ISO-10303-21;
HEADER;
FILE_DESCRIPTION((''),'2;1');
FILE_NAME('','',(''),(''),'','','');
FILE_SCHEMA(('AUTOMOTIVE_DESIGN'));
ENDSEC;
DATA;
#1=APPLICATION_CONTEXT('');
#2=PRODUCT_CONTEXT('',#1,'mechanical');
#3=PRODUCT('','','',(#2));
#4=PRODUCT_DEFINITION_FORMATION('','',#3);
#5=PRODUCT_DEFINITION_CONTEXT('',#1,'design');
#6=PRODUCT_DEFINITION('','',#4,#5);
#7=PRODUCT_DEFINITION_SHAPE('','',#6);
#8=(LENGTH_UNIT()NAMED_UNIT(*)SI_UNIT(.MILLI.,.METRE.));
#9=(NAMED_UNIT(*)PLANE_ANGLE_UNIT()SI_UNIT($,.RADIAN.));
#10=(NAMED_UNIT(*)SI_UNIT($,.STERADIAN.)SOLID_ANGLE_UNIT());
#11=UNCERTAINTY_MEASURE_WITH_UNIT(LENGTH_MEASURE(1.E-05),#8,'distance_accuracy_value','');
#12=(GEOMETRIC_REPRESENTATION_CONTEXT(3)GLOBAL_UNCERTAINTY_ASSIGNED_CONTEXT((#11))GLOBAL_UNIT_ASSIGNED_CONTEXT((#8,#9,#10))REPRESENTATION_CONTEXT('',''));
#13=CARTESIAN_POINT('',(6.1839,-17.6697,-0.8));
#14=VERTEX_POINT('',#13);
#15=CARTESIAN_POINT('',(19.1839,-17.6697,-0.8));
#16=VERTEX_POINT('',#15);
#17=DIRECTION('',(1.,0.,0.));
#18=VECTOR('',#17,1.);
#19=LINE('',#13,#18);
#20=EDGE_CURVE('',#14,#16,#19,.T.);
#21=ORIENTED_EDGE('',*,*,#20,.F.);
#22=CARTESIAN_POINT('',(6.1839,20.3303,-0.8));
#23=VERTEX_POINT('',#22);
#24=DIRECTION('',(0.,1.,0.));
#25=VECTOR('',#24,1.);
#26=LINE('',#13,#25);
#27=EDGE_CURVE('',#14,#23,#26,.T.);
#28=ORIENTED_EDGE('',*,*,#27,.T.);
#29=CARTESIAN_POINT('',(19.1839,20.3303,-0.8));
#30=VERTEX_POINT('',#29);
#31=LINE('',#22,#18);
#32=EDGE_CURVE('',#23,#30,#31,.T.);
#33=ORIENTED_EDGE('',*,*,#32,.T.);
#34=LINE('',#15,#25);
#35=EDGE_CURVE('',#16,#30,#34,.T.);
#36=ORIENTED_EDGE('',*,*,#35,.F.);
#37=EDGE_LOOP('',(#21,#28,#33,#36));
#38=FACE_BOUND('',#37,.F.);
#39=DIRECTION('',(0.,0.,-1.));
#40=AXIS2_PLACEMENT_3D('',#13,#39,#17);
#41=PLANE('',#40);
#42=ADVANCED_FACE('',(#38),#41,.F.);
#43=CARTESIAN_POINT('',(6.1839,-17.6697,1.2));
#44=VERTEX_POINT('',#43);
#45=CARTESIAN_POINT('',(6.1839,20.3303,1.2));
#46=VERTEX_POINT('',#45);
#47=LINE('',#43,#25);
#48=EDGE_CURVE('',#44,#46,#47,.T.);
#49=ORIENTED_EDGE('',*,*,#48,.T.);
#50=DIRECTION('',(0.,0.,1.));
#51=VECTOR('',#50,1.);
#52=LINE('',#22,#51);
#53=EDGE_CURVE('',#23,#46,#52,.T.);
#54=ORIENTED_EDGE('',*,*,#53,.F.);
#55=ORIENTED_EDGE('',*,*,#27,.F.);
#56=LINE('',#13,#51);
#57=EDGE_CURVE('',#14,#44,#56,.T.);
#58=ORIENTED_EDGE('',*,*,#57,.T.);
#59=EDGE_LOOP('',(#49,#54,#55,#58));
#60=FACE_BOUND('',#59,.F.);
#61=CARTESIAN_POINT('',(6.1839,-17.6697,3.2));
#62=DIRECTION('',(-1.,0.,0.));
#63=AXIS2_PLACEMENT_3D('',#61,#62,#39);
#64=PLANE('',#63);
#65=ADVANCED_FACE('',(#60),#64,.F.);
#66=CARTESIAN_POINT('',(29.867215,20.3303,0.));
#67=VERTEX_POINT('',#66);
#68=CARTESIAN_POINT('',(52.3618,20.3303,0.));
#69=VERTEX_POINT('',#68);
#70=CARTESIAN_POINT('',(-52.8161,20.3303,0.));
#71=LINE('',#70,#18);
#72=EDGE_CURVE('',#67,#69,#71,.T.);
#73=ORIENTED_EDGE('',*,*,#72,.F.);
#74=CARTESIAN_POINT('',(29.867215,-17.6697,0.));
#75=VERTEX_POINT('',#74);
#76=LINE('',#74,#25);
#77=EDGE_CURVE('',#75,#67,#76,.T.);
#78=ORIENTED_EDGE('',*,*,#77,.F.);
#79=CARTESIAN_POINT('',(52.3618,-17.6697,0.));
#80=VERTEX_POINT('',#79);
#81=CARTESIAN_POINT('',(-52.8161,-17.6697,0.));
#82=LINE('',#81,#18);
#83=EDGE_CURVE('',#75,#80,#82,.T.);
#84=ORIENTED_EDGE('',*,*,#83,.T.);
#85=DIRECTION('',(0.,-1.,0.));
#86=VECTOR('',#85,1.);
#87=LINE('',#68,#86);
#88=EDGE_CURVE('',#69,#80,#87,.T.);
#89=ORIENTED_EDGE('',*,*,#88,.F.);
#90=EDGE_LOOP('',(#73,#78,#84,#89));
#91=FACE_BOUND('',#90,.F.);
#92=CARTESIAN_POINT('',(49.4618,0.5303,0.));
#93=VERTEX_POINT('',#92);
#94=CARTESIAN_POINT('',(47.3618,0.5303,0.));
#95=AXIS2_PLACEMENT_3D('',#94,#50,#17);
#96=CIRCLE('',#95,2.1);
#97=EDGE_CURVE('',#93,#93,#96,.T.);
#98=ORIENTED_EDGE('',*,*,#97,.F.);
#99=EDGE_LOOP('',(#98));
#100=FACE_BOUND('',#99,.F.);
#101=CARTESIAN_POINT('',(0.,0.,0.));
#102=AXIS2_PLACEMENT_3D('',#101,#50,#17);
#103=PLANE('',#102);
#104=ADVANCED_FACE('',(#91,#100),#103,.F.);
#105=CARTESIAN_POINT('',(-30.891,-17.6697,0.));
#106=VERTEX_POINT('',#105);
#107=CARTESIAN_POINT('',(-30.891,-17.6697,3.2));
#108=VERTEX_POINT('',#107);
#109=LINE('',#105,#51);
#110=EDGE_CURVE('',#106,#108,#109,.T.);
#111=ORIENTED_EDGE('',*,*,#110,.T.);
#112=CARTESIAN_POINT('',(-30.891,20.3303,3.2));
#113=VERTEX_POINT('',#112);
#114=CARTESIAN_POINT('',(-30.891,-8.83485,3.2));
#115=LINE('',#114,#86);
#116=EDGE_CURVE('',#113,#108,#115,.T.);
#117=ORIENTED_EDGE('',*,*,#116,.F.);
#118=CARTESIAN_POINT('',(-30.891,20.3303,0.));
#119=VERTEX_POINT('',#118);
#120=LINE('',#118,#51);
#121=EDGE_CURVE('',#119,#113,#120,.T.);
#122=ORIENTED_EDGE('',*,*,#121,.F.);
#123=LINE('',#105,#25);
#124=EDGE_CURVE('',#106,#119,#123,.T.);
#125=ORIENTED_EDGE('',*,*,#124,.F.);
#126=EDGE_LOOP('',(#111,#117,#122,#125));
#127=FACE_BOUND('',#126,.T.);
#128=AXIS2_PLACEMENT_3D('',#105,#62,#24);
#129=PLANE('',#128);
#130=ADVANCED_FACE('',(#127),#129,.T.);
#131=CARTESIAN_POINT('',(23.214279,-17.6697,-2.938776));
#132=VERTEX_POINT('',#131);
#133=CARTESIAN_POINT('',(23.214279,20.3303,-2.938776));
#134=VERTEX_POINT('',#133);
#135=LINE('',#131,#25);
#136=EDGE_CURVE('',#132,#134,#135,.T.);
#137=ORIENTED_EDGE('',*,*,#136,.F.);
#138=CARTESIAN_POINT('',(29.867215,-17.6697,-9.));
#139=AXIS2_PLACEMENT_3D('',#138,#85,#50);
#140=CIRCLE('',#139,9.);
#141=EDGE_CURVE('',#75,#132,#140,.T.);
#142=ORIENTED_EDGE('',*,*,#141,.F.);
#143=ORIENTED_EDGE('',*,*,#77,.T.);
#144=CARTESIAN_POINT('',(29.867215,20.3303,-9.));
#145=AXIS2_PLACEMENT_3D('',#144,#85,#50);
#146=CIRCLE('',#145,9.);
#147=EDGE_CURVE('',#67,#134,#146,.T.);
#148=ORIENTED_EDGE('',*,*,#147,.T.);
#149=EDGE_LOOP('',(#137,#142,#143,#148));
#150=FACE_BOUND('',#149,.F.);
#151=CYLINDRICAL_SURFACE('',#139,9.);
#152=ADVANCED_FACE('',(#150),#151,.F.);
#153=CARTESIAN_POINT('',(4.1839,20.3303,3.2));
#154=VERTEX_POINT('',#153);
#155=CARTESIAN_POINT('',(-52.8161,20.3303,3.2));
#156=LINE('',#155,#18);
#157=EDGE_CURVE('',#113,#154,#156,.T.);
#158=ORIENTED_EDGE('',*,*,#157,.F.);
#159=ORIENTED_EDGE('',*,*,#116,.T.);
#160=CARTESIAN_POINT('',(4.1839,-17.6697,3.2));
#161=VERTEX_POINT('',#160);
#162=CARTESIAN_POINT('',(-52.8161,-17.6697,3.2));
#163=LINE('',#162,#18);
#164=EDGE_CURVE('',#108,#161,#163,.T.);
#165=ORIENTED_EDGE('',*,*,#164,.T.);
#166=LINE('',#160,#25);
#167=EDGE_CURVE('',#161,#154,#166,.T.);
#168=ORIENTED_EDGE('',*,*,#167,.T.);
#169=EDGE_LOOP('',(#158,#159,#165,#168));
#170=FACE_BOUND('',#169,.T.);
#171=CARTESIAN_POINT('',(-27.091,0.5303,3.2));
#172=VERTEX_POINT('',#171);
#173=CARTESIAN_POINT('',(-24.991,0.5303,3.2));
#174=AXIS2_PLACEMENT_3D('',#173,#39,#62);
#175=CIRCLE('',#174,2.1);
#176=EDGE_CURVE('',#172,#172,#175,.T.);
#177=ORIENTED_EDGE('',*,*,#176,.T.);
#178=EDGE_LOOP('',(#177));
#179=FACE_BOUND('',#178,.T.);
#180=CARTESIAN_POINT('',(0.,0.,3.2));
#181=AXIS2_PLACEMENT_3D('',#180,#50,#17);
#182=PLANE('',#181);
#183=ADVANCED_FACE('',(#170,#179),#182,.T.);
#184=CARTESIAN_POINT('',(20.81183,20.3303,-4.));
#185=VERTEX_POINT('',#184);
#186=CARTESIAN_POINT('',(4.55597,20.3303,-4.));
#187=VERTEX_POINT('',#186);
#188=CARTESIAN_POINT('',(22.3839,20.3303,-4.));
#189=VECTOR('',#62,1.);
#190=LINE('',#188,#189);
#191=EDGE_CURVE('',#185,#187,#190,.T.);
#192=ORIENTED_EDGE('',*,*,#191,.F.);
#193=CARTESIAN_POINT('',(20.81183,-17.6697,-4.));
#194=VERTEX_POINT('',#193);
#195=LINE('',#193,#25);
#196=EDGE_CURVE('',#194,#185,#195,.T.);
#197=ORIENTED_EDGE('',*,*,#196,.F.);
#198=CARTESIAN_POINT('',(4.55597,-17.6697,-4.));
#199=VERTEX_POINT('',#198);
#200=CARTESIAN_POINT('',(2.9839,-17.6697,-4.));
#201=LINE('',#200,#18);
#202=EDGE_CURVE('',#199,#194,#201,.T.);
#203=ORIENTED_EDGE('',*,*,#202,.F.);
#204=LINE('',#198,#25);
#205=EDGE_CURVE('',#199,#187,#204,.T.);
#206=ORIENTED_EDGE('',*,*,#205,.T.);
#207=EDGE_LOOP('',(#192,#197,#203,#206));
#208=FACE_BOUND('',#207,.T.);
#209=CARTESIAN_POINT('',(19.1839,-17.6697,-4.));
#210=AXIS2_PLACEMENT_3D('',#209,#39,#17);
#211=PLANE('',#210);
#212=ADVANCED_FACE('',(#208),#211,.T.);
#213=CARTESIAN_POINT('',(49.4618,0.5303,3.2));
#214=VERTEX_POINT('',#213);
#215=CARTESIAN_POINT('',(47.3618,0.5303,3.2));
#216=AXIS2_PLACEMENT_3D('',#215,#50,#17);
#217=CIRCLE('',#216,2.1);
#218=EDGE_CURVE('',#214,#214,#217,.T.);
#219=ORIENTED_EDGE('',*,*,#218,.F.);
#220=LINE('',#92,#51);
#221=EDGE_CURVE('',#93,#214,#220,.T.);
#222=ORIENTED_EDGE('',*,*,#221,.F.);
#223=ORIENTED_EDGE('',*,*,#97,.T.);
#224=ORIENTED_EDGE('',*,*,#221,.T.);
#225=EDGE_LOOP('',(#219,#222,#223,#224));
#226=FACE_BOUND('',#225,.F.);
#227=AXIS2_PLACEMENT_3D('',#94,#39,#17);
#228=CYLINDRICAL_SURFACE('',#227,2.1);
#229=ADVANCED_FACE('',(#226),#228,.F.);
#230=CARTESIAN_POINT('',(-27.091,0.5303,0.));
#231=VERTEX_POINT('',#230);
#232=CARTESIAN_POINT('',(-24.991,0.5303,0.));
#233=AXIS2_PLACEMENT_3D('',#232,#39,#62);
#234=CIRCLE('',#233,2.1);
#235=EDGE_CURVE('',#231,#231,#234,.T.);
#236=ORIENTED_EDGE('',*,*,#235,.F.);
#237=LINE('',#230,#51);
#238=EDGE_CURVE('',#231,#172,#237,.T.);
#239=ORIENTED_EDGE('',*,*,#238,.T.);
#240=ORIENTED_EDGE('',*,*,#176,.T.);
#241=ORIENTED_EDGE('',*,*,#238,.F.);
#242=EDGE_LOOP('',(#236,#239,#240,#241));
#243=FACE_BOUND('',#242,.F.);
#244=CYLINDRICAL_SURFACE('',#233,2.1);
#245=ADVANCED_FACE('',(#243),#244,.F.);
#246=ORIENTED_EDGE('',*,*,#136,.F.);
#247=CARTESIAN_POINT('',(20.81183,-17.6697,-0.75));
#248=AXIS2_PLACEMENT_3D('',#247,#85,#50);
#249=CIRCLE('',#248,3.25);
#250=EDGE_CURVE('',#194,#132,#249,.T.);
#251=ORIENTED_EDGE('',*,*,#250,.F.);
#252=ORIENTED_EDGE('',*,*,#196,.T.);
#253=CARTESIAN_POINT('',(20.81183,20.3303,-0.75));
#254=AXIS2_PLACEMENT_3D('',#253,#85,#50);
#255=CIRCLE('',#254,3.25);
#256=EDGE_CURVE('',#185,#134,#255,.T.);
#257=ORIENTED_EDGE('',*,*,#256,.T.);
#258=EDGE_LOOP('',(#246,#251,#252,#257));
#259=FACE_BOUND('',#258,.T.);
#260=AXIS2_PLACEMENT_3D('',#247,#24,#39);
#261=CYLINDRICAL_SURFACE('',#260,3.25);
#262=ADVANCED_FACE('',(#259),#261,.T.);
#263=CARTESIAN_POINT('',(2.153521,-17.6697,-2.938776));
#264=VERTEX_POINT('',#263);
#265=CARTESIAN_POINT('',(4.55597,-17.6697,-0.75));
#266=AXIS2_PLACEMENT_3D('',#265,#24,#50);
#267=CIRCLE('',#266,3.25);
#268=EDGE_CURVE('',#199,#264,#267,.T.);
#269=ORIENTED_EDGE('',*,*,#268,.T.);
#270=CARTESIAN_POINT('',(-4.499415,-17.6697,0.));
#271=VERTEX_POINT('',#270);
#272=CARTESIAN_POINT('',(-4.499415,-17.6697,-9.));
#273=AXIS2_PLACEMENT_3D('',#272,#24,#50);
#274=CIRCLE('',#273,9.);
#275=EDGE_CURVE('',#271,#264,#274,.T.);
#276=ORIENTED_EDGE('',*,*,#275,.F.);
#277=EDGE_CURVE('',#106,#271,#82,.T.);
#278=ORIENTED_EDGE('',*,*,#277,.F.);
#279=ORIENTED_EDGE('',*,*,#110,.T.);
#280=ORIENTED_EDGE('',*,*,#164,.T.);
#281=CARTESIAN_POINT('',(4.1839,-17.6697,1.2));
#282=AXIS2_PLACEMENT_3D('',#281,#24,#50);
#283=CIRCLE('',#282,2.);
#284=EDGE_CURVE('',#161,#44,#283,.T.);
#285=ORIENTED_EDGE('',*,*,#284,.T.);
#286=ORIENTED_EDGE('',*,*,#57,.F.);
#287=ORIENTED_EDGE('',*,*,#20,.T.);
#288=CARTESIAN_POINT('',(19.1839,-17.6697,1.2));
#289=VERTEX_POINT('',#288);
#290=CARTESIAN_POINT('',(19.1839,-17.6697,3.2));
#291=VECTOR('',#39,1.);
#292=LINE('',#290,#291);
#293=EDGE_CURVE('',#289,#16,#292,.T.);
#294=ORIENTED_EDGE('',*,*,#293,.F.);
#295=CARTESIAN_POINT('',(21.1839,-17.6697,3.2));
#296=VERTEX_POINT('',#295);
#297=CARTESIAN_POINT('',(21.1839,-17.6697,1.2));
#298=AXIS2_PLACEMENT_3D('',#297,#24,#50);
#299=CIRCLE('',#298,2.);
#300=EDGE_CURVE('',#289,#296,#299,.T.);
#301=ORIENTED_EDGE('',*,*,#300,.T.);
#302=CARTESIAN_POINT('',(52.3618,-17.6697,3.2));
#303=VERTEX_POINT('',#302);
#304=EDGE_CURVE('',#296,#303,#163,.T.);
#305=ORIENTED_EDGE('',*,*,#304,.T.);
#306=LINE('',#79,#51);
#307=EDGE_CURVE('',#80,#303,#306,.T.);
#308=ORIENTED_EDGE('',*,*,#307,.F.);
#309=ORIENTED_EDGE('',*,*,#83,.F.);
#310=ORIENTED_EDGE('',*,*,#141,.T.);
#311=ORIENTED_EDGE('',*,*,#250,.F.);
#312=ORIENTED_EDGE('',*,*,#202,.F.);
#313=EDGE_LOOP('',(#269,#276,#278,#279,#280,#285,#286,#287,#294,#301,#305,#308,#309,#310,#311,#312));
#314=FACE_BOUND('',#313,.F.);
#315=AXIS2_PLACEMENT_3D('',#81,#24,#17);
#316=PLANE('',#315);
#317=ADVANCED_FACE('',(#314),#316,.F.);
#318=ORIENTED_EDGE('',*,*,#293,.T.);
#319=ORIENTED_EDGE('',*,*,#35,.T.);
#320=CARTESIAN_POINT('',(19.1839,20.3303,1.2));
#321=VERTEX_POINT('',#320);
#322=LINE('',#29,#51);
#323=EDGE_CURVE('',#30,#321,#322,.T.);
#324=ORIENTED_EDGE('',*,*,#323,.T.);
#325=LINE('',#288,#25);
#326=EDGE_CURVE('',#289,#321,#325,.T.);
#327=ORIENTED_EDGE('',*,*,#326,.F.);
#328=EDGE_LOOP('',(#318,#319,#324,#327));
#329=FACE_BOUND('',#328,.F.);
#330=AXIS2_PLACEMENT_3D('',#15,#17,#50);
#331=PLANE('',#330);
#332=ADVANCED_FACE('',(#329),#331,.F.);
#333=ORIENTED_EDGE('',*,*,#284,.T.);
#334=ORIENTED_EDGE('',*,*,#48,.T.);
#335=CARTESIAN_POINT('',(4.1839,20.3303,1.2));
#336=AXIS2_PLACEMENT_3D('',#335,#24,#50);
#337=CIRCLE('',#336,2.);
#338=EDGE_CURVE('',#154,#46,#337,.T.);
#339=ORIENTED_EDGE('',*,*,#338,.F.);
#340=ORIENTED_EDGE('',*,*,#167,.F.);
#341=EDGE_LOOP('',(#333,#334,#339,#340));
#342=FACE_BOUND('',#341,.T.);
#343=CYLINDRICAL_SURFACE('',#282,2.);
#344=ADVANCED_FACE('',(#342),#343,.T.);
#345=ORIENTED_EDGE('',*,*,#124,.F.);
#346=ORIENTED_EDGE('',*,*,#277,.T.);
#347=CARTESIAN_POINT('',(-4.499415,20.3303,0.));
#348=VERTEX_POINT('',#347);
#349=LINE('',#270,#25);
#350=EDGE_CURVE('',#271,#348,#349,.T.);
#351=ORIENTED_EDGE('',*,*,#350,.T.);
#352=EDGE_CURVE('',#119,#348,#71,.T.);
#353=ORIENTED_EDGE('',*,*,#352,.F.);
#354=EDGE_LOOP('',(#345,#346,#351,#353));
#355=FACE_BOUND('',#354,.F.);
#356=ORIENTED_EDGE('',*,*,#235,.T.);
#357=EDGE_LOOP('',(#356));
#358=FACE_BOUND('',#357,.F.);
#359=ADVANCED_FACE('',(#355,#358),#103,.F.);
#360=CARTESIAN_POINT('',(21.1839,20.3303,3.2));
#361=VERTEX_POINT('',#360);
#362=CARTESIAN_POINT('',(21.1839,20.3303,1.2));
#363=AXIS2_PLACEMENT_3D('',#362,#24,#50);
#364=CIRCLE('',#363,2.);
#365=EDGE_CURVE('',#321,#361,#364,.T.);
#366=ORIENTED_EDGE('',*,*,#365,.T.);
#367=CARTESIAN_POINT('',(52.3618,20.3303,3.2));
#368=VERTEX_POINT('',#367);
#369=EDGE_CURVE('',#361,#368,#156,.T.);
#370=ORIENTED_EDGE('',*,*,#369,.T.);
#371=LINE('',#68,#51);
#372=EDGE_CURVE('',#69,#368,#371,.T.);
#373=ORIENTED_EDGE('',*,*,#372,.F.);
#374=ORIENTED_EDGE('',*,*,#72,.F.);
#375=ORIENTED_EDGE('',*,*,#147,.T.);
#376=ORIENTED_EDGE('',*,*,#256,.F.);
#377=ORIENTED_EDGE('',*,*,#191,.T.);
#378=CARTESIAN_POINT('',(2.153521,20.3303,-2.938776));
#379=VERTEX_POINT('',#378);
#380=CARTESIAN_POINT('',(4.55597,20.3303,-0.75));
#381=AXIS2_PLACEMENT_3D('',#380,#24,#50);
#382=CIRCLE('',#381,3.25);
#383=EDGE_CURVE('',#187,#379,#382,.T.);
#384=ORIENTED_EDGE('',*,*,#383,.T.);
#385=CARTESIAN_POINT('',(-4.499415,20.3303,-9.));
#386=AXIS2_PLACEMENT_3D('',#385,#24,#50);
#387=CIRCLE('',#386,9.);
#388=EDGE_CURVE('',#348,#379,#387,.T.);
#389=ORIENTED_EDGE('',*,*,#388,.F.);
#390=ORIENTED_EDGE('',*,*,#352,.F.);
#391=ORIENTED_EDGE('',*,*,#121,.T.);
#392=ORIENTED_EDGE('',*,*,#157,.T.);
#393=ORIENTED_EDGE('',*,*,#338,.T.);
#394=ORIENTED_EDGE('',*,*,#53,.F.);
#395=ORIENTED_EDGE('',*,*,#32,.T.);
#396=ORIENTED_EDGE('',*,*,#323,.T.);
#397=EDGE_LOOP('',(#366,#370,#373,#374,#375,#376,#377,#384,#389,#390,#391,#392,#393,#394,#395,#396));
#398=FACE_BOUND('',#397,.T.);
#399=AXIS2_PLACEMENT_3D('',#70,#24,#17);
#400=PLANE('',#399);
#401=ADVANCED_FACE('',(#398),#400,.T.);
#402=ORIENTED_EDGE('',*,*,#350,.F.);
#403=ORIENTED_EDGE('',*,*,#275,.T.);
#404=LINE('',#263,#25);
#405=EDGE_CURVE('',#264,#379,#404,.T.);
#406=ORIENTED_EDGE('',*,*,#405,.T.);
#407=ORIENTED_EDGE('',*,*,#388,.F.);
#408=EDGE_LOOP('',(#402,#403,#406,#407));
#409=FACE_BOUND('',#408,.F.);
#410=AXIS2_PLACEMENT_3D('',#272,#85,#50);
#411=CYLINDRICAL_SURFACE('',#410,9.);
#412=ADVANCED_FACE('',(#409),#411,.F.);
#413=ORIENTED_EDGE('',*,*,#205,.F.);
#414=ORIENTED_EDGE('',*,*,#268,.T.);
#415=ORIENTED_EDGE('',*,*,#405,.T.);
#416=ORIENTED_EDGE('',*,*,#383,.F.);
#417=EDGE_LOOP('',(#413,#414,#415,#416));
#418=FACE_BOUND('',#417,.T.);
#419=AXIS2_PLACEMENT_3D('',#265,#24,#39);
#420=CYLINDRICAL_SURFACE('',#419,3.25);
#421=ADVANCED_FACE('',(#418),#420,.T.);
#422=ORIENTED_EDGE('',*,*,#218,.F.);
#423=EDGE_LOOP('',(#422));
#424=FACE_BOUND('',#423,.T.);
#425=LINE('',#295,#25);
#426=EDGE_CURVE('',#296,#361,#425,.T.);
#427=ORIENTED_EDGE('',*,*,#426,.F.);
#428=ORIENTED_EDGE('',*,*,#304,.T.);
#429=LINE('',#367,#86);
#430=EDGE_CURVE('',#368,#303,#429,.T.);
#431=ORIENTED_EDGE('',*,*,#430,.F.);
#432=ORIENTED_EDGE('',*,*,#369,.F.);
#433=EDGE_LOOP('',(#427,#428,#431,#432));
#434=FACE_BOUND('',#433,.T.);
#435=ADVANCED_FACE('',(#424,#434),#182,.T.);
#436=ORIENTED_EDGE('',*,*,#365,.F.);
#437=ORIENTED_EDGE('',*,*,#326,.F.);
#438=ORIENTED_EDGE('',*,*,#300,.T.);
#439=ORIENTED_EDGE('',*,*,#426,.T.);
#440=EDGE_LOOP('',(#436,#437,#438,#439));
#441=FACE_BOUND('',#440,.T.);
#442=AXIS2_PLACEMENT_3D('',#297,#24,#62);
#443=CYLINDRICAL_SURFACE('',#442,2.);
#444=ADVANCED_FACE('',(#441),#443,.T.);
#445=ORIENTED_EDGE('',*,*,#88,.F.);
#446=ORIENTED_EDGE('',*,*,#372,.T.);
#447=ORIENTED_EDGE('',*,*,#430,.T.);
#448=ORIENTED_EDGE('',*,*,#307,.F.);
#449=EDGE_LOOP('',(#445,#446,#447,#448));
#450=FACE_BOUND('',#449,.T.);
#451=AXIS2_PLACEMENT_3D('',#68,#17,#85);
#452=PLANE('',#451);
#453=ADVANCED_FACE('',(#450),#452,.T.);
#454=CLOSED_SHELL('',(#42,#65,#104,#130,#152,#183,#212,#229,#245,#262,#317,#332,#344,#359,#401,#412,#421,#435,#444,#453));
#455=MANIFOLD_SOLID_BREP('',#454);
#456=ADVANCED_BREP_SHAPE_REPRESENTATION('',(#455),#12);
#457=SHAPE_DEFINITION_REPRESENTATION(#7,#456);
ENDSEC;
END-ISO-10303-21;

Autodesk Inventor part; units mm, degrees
ref_plane "YZ Plane" through (0, 0, 0) normal (1, 0, 0) x (0, 1, 0)
ref_plane "XZ Plane" through (0, 0, 0) normal (0, 1, 0) x (-1, 0, 0)
ref_plane "XY Plane" through (0, 0, 0) normal (0, 0, 1) x (1, 0, 0)
sketch "Эскиз1" plane through (0, 0, 0) normal (0, 0, 1) x (1, 0, 0)
  line L0 (-52.8161, -17.6697) -> (52.3618, -17.6697)
  line L1 (-52.8161, 20.3303) -> (52.3618, 20.3303)
  line L2 (52.3618, 20.3303) -> (52.3618, -17.6697)
  line L3 (52.3618, -17.6697) -> (-52.8161, -17.6697)
  line L4 (-52.8161, -17.6697) -> (-52.8161, 20.3303)
  circle A0 centre (-47.8161, 0.5303) radius 2.1
  circle A1 centre (47.3618, 0.5303) radius 2.1
  point P0 (0, 0)
  point P1 (-8.6177, 20.3303)
extrude "Выдавливание1" add sketch "Эскиз1" along normal blind 3.2
sketch "Эскиз2" plane through (-52.8161, -17.6697, 0) normal (0, -1, 0) x (1, 0, 0)
  line L0 (105.1779, 3.2) -> (0, 3.2) projected
  line L1 (105.1779, 0) -> (0, 0) projected
  line L2 (72, 3.2) -> (59, 3.2)
  line L3 (59, 3.2) -> (59, 0)
  line L4 (59, 0) -> (72, 0)
  line L5 (72, 3.2) -> (59, 3.2)
  line L6 (59, 3.2) -> (59, -0.8)
  line L7 (59, -0.8) -> (72, -0.8)
  line L8 (72, -0.8) -> (72, 3.2)
  point P0 (52.8161, 0)
  dimension "d5" = 4
extrude "Выдавливание2" cut sketch "Эскиз2" against normal through all
fillet "Сопряжение1" radius 2 1 edges at (6.1839, 1.3303, 3.2)
sketch "Эскиз3" plane through (-52.8161, -17.6697, 0) normal (0, -1, 0) x (1, 0, 0)
  line L0 (105.1779, 3.2) -> (72, 3.2) projected
  line L1 (72, 3.2) -> (59, 3.2)
  line L2 (59, 3.2) -> (59, -0.8)
  line L3 (59, -0.8) -> (72, -0.8)
  line L4 (72, -0.8) -> (72, 3.2)
  line L5 (72, -0.8) -> (59, -0.8)
  line L6 (59, -0.8) -> (59, -4)
  line L7 (59, -4) -> (72, -4)
  line L8 (72, -4) -> (72, -0.8)
  line L9 (72, 0) -> (105.1779, 0) projected
  line L10 (72, -4) -> (75.2, -4)
  line L11 (75.2, -4) -> (75.2, 0)
  line L12 (75.2, 0) -> (72, 0)
  line L13 (72, 0) -> (72, -4)
  line L14 (59, -4) -> (55.8, -4)
  line L15 (55.8, -4) -> (55.8, 0)
  line L16 (55.8, 0) -> (59, 0)
  line L17 (59, 0) -> (59, -4)
  point P0 (52.8161, 0)
  dimension "d6" = 13
  dimension "d7" = 4
  dimension "d8" = 13
  dimension "d9" = 3.2
  dimension "d10" = 3.2
  dimension "d11" = 3.2
extrude "Выдавливание3" add sketch "Эскиз3" against normal up to surface (38 mm away) contours L9 L11 L10 L8 L4 | L2 L6 L14 L15 L16 | L8 L7 L6 L3
fillet "Сопряжение2" radius 2 1 edges at (19.1839, 1.3303, 3.2)
fillet "Сопряжение3" radius 9 2 edges at (22.3839, 1.3303, 0) (2.9839, 1.3303, 0)
fillet "Сопряжение4" radius 3.25 2 edges at (2.9839, 1.3303, -4) (22.3839, 1.3303, -4)
sketch "Эскиз4" plane through (0, 0, 0) normal (0, 0, -1) x (-1, 0, 0)
  line L0 (30.891, 20.3303) -> (19.391, 20.3303) projected
  line L1 (30.891, -17.6697) -> (30.891, 20.3303) projected
  line L2 (19.391, -17.6697) -> (30.891, -17.6697) projected
  line L3 (19.391, -17.6697) -> (19.391, 20.3303) projected
  circle A0 centre (24.991, 0.5303) radius 2.1 projected
  line L4 (4.4994, -17.6697) -> (4.4994, 20.3303) projected
  line L5 (52.8161, -17.6697) -> (4.4994, -17.6697) projected
  line L6 (52.8161, 20.3303) -> (52.8161, -17.6697) projected
  line L7 (4.4994, 20.3303) -> (52.8161, 20.3303) projected
  circle A1 centre (47.8161, 0.5303) radius 2.1 projected
  point P0 (0, 0)
extrude "Выдавливание4" cut sketch "Эскиз4" against normal blind 10 contours L7 L6 L5 L1 | A0
properties part number "драйвер 2"
